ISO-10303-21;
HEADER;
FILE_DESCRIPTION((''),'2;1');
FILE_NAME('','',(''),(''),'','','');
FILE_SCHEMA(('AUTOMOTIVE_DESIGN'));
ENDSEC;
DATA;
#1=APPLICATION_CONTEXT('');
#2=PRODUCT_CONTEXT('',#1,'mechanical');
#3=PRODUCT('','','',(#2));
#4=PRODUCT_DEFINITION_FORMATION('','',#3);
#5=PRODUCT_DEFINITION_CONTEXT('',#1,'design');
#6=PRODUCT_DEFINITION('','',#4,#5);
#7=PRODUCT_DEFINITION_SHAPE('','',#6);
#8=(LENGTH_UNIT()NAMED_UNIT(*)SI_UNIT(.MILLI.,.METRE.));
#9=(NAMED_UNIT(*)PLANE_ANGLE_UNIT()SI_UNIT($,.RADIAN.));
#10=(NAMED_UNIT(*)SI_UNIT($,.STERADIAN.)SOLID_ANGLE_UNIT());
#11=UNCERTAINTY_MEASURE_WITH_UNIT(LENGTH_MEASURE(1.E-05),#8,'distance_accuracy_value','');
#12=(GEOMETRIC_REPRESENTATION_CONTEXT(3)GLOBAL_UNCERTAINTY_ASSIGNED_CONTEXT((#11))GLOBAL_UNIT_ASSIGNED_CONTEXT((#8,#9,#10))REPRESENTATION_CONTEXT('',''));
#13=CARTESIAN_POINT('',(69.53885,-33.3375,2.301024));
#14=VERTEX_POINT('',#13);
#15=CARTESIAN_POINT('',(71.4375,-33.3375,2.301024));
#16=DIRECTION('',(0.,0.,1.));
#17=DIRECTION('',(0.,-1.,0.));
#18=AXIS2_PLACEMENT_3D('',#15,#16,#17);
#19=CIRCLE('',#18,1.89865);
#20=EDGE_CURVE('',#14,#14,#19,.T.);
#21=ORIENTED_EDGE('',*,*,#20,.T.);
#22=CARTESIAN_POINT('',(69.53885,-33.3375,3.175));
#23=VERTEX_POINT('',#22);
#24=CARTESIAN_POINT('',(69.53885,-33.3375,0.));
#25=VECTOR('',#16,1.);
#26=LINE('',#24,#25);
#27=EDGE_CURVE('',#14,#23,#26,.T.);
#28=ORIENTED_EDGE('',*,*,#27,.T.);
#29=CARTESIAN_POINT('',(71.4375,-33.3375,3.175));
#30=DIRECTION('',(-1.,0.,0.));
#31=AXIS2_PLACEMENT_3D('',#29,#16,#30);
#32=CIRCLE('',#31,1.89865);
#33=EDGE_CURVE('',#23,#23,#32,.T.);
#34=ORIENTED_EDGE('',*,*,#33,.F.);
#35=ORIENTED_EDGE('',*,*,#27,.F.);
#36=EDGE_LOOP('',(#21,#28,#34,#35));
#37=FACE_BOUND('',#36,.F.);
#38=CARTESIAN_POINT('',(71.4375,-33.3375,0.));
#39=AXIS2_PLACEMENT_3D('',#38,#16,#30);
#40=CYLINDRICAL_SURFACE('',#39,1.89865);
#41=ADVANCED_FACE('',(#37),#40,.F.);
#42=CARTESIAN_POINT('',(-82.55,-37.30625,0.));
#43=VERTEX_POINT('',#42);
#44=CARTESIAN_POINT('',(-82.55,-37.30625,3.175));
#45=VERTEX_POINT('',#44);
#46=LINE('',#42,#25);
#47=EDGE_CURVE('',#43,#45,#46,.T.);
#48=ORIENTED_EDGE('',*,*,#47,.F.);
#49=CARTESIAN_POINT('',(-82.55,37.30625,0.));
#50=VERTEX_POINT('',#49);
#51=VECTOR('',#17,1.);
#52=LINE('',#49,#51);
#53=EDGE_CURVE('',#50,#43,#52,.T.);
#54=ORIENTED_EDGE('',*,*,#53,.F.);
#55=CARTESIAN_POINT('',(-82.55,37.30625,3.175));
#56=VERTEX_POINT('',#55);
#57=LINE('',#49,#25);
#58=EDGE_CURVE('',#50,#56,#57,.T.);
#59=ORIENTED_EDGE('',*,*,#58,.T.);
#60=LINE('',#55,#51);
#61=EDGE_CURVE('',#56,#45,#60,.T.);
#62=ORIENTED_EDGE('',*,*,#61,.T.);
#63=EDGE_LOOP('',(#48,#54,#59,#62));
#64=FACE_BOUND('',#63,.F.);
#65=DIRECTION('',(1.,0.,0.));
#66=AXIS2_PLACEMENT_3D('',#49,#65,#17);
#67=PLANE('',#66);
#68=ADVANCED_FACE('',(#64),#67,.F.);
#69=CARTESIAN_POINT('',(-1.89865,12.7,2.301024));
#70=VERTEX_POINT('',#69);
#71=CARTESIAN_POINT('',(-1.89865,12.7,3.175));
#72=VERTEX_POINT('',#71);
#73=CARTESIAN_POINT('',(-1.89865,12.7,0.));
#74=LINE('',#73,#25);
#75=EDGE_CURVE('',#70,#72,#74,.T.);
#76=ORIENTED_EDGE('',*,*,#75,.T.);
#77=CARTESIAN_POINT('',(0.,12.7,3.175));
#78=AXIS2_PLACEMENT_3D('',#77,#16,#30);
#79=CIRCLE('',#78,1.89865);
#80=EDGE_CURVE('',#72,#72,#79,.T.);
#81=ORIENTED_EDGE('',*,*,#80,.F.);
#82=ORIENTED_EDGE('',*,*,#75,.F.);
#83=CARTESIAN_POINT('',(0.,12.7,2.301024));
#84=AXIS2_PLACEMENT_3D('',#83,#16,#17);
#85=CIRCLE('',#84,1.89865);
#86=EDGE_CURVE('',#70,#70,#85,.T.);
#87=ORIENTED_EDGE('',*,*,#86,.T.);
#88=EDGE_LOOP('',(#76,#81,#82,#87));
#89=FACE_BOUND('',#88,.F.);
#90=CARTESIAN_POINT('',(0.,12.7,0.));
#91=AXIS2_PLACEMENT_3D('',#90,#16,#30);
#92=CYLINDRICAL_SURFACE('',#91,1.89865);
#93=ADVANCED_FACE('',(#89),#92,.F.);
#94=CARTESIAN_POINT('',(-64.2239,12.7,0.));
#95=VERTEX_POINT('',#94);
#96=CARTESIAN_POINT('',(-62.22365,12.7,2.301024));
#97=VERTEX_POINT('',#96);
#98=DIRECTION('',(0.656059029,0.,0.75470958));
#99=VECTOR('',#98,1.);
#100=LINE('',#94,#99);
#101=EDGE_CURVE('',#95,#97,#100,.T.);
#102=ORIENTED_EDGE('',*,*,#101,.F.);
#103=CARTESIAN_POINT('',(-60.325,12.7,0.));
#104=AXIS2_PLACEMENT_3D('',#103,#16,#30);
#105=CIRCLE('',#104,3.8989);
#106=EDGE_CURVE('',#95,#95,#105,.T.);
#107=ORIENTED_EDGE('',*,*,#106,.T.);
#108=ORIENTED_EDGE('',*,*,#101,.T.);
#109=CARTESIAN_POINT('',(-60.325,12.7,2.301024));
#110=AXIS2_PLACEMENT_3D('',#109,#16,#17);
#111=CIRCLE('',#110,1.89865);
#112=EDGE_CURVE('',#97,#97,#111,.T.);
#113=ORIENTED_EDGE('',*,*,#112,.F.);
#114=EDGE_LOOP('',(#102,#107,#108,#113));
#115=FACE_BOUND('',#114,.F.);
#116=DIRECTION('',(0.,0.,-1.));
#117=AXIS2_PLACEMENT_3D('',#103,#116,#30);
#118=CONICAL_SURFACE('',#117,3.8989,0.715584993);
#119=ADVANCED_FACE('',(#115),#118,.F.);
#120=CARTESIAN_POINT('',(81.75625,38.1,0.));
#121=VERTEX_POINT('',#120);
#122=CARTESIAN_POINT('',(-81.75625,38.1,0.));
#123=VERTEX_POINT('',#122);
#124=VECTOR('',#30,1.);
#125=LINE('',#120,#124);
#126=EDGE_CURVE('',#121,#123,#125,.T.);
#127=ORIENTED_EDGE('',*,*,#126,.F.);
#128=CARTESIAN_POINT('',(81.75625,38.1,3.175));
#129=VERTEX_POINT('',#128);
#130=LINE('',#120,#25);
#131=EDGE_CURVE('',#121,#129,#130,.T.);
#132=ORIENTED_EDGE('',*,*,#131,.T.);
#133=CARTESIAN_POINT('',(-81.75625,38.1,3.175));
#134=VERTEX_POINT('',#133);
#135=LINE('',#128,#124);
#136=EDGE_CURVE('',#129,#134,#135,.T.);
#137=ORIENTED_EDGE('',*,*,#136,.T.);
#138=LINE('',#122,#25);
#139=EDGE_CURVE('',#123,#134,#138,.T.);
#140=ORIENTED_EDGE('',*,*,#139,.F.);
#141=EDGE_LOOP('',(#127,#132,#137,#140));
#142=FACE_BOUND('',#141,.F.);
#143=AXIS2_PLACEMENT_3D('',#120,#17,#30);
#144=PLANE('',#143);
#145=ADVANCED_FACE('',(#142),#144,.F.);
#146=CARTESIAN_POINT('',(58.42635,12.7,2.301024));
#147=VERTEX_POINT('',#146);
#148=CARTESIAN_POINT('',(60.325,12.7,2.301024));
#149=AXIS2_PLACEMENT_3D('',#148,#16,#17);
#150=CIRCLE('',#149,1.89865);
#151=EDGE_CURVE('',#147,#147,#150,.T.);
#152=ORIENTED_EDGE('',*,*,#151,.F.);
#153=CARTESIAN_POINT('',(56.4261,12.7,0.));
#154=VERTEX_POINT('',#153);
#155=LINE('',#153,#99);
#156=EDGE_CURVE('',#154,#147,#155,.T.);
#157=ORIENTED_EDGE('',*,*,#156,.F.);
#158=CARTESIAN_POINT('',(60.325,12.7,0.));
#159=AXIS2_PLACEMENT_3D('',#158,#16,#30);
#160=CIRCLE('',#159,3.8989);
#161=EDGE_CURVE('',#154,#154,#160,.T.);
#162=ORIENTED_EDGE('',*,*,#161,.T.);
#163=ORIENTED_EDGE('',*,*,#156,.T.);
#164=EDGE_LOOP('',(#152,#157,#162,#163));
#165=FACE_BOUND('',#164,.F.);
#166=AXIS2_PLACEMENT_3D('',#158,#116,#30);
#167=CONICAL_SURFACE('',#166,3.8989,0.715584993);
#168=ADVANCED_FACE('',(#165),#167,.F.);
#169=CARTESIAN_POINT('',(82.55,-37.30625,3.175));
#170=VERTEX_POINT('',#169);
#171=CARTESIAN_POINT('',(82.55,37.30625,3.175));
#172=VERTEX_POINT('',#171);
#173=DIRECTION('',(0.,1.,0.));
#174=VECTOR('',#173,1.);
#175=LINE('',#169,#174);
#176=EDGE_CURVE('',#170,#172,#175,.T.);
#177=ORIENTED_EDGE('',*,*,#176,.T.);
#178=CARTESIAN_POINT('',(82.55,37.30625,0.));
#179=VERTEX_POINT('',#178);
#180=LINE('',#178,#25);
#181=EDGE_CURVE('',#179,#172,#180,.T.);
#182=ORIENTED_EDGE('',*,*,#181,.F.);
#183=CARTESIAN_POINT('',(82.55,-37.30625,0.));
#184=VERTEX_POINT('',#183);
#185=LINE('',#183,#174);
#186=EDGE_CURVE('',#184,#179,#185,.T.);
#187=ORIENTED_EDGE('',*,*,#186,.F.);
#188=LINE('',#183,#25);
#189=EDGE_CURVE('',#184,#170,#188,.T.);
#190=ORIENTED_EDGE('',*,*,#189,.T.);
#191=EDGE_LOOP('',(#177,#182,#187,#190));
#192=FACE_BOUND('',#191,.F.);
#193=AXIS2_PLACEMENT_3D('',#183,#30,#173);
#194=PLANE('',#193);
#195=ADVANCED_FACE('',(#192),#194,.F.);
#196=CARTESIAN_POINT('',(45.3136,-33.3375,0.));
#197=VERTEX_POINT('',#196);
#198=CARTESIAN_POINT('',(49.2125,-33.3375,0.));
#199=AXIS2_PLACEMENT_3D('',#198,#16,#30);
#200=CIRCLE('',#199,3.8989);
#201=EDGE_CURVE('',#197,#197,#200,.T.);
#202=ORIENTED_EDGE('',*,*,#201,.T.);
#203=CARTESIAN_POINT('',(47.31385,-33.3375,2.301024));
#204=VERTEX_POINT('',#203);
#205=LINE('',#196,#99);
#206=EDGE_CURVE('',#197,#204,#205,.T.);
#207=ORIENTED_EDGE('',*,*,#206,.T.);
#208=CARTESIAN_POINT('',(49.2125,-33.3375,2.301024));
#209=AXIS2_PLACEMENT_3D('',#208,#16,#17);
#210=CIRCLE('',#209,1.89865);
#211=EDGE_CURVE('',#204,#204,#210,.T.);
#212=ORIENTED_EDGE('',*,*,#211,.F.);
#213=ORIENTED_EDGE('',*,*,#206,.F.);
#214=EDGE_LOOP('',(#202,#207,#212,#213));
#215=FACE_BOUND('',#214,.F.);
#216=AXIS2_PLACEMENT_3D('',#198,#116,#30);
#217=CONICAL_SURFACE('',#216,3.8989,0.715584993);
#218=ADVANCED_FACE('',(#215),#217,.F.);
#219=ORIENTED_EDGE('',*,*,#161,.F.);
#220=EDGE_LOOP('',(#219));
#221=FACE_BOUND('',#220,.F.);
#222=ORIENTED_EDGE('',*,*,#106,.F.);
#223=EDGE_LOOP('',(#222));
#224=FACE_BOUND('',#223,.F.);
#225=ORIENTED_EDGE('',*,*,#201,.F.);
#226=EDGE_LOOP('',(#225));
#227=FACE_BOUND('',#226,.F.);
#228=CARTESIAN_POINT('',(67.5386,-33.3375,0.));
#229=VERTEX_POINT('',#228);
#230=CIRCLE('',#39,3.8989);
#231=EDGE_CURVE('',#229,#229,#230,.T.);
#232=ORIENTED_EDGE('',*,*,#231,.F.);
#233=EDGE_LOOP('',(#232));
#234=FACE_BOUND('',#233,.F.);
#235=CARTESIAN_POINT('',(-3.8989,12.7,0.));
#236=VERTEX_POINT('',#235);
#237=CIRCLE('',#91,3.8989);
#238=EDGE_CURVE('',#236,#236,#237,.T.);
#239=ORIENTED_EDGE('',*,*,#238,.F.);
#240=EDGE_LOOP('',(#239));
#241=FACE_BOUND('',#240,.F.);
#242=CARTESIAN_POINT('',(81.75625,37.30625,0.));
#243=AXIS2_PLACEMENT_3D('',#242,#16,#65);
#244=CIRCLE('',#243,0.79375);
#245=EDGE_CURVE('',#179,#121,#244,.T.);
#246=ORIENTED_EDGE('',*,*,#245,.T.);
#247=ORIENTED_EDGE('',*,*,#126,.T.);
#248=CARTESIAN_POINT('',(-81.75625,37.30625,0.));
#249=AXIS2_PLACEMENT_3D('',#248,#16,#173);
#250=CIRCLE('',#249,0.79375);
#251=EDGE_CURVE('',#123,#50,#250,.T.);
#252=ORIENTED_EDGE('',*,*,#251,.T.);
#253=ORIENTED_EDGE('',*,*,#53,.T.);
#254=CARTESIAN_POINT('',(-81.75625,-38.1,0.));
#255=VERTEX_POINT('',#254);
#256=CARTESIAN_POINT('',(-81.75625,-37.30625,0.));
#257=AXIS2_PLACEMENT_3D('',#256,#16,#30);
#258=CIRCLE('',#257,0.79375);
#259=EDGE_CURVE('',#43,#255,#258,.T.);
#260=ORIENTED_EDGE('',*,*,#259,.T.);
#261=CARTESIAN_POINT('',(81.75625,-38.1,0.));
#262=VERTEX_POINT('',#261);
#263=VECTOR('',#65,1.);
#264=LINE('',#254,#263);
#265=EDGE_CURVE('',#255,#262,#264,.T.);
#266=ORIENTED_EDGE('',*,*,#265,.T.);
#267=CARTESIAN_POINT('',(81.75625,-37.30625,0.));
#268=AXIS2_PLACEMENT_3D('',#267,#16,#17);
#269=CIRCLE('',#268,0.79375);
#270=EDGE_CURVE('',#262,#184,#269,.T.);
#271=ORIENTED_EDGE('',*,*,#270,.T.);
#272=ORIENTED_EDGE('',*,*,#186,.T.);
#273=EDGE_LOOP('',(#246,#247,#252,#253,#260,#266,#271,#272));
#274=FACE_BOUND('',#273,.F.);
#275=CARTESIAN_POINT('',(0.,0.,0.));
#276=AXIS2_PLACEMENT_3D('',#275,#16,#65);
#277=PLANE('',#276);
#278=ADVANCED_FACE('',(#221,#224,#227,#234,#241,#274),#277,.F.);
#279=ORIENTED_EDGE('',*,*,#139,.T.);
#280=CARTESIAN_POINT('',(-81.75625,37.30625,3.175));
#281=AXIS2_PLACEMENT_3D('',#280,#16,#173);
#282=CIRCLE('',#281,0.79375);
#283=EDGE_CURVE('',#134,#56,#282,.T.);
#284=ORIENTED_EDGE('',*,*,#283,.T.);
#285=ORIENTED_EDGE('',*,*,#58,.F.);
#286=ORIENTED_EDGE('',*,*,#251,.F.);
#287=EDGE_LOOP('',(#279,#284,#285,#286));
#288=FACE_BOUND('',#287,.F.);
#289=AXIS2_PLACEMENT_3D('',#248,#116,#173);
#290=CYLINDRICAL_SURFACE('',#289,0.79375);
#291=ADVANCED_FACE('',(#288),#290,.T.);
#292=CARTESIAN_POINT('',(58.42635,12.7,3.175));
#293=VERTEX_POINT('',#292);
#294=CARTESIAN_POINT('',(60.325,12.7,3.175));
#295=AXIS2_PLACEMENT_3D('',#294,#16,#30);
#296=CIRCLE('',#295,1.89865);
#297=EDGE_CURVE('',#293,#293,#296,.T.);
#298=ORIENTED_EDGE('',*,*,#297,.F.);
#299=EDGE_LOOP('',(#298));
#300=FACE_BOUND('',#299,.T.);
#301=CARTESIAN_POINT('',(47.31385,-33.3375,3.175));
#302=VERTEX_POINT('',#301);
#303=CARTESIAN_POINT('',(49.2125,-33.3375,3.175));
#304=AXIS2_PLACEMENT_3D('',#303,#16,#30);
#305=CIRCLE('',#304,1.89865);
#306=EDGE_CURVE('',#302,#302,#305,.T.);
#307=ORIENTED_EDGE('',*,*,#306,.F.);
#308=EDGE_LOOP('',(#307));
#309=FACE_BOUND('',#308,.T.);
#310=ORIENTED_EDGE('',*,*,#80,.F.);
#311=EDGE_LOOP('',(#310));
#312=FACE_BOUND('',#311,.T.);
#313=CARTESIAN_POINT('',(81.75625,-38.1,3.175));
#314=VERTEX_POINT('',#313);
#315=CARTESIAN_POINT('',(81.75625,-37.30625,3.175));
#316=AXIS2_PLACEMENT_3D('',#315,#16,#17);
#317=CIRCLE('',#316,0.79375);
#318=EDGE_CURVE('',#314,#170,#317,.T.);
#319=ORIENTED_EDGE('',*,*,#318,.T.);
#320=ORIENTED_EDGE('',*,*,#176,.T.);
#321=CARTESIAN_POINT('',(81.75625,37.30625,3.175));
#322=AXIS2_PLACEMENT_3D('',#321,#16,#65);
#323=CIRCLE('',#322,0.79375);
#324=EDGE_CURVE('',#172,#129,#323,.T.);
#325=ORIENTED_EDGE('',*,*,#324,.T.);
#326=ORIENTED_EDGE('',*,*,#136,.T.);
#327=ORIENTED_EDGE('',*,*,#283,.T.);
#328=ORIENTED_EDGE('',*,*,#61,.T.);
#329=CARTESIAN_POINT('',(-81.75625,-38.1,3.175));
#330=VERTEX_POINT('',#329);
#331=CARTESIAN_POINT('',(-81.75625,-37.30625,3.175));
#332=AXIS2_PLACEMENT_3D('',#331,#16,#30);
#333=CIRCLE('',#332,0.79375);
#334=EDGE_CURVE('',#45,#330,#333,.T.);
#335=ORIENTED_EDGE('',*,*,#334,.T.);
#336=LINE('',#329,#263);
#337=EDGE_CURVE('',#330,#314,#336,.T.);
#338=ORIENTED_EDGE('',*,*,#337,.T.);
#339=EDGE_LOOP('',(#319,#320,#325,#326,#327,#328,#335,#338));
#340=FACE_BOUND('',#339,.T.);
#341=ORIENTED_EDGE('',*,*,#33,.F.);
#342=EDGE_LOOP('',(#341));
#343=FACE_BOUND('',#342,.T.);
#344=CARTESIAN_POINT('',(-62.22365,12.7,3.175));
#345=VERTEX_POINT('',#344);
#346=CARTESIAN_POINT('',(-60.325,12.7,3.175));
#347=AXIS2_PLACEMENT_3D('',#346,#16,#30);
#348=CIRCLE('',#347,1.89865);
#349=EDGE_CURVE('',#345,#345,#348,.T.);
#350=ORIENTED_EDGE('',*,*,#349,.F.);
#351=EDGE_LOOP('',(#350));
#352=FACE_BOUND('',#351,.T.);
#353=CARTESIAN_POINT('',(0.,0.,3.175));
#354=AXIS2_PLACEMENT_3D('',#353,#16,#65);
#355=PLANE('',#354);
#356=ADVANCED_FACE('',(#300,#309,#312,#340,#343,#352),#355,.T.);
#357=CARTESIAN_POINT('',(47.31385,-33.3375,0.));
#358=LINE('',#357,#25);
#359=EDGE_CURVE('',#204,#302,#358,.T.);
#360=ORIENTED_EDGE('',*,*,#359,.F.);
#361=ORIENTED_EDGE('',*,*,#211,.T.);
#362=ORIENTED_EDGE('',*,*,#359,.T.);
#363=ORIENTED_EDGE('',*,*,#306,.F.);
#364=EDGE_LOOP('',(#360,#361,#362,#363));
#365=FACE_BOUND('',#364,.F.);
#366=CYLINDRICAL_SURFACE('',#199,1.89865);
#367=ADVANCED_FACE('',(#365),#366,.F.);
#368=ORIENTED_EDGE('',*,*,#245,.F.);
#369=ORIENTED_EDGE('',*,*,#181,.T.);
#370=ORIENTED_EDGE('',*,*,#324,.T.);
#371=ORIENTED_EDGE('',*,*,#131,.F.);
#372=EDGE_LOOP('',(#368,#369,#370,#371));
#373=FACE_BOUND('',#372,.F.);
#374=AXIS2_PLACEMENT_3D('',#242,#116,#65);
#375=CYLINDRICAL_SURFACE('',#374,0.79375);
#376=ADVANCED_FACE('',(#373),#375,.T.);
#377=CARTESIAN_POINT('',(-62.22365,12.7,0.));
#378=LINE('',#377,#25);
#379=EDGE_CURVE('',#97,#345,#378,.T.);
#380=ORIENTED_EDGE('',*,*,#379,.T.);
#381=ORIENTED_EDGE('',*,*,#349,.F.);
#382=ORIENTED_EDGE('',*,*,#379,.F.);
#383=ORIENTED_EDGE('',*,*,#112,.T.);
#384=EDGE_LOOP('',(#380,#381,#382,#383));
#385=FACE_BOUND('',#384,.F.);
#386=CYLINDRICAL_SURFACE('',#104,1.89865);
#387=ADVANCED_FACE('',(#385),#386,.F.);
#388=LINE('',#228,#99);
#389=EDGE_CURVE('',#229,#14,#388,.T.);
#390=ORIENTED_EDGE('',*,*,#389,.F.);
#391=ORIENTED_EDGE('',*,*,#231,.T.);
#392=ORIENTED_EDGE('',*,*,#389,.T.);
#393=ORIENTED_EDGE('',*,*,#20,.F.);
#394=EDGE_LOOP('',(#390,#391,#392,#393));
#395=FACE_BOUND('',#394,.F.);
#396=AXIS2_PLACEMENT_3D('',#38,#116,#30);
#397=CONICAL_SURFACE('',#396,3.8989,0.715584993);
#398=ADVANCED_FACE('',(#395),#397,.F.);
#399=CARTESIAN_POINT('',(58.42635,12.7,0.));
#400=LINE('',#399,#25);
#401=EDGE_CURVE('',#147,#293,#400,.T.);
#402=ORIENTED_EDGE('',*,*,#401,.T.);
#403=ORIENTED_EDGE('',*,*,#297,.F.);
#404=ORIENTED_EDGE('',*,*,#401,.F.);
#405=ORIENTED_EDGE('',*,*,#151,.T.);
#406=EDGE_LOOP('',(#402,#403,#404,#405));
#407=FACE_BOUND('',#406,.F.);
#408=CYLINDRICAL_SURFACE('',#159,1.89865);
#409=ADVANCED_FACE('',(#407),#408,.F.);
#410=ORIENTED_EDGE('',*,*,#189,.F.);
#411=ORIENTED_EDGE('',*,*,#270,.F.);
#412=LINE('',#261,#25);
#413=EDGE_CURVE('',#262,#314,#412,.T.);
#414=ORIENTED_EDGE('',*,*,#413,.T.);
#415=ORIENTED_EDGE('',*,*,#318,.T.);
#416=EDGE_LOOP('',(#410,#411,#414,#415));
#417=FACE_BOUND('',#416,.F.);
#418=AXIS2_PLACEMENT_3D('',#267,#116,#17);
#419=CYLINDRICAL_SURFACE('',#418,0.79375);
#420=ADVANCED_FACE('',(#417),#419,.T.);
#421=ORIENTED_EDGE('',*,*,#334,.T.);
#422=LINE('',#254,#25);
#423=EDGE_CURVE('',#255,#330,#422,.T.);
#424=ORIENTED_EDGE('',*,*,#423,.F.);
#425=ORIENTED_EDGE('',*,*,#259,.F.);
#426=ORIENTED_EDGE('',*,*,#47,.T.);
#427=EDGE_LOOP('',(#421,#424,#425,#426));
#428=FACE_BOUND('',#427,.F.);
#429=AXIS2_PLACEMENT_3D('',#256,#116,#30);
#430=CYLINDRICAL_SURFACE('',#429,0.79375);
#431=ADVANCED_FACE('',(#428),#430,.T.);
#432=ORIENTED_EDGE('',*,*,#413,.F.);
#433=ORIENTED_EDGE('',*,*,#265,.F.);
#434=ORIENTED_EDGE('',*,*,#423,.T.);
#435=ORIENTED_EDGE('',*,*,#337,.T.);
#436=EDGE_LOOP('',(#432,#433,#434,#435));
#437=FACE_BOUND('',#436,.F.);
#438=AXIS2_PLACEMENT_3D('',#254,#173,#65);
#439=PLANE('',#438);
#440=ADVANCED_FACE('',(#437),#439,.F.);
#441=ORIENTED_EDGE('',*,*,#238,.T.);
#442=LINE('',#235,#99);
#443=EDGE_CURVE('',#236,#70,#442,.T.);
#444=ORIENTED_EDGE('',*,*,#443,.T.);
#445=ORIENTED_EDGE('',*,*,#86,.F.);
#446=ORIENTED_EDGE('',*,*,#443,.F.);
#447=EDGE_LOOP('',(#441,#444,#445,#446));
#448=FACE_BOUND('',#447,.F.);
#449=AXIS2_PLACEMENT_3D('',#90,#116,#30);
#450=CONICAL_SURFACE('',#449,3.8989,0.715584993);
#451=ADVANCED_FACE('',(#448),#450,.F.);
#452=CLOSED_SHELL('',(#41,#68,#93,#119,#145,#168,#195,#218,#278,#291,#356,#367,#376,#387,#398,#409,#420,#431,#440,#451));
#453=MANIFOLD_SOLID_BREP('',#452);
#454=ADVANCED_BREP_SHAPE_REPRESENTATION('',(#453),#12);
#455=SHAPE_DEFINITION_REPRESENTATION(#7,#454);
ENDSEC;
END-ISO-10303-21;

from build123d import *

# Parameters (mm, degrees)
F1_DEPTH       = 3.175
F2_D           = 3.7973
F2_CSINK_D     = 7.7978
F2_CSINK_ANGLE = 82


# Not quite as in the source:
# - a feature of the source that left no trace in its solid (it failed there, or was rolled back) is left out


with BuildPart() as f1:
    # F0 (on Top) → F1 (new body)
    with BuildSketch(Plane.XY):
        with BuildLine():
            Line((81.75625, 38.1), (-81.75625, 38.1))
            ThreePointArc((-81.75625, 38.1), (-82.3175160076, 37.8675160076), (-82.55, 37.30625))
            Line((-82.55, 37.30625), (-82.55, -37.30625))
            ThreePointArc((-82.55, -37.30625), (-82.3175160076, -37.8675160076), (-81.75625, -38.1))
            Line((-81.75625, -38.1), (81.75625, -38.1))
            ThreePointArc((81.75625, -38.1), (82.3175160076, -37.8675160076), (82.55, -37.30625))
            Line((82.55, -37.30625), (82.55, 37.30625))
            ThreePointArc((82.55, 37.30625), (82.3175160076, 37.8675160076), (81.75625, 38.1))
        make_face()
    extrude(amount=F1_DEPTH)

    # F2 (through all)
    with Locations(Plane(origin=(0, 0, 0), x_dir=(1, 0, 0), z_dir=(0, 0, -1))):
        with Locations((49.2125, 33.3375), (71.4375, 33.3375), (60.325, -12.7), (0, -12.7), (-60.325, -12.7)):
            CounterSinkHole(F2_D / 2, F2_CSINK_D / 2, counter_sink_angle=F2_CSINK_ANGLE)


solid = f1.part
